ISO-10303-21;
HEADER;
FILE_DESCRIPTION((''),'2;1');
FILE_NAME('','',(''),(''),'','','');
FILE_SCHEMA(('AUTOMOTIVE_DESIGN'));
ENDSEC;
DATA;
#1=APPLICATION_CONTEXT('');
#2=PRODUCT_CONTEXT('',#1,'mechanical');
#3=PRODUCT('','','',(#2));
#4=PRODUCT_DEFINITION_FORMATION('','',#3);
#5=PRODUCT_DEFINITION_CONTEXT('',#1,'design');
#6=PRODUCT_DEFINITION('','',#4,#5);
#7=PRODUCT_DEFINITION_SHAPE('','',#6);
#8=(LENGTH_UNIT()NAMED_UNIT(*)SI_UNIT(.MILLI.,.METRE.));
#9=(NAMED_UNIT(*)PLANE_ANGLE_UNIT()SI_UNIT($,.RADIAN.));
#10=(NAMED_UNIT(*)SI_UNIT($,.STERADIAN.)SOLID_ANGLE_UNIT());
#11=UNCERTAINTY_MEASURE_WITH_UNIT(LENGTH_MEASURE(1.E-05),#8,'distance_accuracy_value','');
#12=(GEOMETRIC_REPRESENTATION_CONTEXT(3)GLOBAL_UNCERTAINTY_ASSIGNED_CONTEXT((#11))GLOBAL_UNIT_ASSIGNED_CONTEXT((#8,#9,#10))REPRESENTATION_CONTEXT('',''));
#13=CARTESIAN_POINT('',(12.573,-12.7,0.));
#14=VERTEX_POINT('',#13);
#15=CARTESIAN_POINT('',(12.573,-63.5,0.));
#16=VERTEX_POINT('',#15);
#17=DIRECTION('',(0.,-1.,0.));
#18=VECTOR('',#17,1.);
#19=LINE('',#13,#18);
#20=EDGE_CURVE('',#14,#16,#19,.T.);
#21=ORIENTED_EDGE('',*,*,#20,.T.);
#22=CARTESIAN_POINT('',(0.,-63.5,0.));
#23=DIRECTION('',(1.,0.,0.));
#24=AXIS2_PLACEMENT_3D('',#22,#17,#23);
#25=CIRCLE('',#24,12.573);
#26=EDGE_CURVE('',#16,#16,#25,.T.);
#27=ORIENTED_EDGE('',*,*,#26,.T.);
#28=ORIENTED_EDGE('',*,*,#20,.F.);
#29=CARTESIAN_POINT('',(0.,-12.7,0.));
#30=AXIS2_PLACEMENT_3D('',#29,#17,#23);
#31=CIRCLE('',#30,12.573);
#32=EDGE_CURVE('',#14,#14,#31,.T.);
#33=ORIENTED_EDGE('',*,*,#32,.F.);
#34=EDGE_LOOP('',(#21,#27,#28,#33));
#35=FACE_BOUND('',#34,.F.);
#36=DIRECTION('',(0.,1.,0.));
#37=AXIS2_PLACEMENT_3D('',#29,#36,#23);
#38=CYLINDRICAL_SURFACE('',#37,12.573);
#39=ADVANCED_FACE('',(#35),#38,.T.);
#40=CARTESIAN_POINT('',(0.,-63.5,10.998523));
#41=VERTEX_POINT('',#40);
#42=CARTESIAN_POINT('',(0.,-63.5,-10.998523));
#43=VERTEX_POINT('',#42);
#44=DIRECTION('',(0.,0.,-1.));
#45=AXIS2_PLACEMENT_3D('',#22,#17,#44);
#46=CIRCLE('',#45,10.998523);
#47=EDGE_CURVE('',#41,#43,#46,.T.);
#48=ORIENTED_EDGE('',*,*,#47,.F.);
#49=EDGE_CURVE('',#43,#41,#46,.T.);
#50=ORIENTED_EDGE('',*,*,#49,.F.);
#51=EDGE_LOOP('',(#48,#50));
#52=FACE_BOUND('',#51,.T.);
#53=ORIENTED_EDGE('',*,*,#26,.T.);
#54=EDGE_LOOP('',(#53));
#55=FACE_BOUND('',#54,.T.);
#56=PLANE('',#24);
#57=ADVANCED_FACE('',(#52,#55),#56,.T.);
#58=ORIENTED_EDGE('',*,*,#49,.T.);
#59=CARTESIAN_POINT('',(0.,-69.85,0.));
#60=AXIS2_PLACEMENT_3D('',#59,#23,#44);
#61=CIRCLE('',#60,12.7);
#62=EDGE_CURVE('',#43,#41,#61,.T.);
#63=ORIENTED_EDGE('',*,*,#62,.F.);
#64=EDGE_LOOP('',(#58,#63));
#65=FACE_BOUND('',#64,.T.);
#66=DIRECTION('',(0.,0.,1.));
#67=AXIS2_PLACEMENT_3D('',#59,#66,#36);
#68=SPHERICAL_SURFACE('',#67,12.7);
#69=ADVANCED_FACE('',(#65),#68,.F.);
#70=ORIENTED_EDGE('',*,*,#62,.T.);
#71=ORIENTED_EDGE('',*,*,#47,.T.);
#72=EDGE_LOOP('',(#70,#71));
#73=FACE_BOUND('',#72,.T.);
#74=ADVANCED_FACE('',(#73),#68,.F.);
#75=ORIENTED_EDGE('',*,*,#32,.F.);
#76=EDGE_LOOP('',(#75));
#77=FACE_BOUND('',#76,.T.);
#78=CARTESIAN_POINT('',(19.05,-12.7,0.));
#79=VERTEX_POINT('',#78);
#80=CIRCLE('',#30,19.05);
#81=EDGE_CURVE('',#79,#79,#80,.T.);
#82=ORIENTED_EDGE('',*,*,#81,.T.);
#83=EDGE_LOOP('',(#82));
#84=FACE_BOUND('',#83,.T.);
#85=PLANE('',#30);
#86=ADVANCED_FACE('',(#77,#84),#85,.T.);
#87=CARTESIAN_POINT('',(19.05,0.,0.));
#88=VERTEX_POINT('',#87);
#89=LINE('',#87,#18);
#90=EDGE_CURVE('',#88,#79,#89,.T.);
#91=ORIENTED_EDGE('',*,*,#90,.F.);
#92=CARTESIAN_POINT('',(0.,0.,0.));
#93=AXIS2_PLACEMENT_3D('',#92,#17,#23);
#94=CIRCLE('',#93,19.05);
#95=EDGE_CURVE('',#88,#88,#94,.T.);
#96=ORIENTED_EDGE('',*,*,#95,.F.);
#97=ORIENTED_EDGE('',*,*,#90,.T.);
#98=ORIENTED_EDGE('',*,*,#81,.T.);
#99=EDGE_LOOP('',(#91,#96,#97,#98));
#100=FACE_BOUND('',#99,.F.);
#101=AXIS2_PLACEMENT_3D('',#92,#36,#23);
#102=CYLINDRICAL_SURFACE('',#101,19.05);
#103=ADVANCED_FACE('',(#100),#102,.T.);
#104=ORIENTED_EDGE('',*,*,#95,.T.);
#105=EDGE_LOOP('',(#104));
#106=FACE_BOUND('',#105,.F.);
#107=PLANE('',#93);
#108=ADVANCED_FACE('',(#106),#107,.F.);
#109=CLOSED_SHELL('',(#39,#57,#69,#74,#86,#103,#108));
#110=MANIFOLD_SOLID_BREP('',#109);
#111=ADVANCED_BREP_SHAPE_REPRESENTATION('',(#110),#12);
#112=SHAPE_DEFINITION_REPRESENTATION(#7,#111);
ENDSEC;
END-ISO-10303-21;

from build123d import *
from build123d import SkipClean  # not in build123d's __all__

# Parameters (mm, degrees)
F0_R     = 19.05
F1_DEPTH = 12.7
F2_R     = 12.573
F3_DEPTH = 50.8


with BuildPart() as f1:
    # F0 (on Front) → F1 (new body)
    with BuildSketch(Plane.XZ):
        Circle(F0_R)
    extrude(amount=F1_DEPTH)

    # F2 (on face) → F3 (join)
    with BuildSketch(Plane.XZ.offset(12.7)):
        Circle(F2_R)
    extrude(amount=F3_DEPTH)

    # F4 (on Right) → F5 (revolve, cut)
    with BuildSketch(Plane.YZ):
        with BuildLine():
            ThreePointArc((-69.85, -12.7), (-57.15, 0), (-69.85, 12.7))
            Line((-69.85, 12.7), (-69.85, -12.7))
        make_face()
    with SkipClean():  # cleaning this boolean's faces spoils the solid; the shape is the same uncleaned
        revolve(axis=Axis((0, -69.85, 0), (0, 0, -1)), mode=Mode.SUBTRACT)


solid = f1.part
